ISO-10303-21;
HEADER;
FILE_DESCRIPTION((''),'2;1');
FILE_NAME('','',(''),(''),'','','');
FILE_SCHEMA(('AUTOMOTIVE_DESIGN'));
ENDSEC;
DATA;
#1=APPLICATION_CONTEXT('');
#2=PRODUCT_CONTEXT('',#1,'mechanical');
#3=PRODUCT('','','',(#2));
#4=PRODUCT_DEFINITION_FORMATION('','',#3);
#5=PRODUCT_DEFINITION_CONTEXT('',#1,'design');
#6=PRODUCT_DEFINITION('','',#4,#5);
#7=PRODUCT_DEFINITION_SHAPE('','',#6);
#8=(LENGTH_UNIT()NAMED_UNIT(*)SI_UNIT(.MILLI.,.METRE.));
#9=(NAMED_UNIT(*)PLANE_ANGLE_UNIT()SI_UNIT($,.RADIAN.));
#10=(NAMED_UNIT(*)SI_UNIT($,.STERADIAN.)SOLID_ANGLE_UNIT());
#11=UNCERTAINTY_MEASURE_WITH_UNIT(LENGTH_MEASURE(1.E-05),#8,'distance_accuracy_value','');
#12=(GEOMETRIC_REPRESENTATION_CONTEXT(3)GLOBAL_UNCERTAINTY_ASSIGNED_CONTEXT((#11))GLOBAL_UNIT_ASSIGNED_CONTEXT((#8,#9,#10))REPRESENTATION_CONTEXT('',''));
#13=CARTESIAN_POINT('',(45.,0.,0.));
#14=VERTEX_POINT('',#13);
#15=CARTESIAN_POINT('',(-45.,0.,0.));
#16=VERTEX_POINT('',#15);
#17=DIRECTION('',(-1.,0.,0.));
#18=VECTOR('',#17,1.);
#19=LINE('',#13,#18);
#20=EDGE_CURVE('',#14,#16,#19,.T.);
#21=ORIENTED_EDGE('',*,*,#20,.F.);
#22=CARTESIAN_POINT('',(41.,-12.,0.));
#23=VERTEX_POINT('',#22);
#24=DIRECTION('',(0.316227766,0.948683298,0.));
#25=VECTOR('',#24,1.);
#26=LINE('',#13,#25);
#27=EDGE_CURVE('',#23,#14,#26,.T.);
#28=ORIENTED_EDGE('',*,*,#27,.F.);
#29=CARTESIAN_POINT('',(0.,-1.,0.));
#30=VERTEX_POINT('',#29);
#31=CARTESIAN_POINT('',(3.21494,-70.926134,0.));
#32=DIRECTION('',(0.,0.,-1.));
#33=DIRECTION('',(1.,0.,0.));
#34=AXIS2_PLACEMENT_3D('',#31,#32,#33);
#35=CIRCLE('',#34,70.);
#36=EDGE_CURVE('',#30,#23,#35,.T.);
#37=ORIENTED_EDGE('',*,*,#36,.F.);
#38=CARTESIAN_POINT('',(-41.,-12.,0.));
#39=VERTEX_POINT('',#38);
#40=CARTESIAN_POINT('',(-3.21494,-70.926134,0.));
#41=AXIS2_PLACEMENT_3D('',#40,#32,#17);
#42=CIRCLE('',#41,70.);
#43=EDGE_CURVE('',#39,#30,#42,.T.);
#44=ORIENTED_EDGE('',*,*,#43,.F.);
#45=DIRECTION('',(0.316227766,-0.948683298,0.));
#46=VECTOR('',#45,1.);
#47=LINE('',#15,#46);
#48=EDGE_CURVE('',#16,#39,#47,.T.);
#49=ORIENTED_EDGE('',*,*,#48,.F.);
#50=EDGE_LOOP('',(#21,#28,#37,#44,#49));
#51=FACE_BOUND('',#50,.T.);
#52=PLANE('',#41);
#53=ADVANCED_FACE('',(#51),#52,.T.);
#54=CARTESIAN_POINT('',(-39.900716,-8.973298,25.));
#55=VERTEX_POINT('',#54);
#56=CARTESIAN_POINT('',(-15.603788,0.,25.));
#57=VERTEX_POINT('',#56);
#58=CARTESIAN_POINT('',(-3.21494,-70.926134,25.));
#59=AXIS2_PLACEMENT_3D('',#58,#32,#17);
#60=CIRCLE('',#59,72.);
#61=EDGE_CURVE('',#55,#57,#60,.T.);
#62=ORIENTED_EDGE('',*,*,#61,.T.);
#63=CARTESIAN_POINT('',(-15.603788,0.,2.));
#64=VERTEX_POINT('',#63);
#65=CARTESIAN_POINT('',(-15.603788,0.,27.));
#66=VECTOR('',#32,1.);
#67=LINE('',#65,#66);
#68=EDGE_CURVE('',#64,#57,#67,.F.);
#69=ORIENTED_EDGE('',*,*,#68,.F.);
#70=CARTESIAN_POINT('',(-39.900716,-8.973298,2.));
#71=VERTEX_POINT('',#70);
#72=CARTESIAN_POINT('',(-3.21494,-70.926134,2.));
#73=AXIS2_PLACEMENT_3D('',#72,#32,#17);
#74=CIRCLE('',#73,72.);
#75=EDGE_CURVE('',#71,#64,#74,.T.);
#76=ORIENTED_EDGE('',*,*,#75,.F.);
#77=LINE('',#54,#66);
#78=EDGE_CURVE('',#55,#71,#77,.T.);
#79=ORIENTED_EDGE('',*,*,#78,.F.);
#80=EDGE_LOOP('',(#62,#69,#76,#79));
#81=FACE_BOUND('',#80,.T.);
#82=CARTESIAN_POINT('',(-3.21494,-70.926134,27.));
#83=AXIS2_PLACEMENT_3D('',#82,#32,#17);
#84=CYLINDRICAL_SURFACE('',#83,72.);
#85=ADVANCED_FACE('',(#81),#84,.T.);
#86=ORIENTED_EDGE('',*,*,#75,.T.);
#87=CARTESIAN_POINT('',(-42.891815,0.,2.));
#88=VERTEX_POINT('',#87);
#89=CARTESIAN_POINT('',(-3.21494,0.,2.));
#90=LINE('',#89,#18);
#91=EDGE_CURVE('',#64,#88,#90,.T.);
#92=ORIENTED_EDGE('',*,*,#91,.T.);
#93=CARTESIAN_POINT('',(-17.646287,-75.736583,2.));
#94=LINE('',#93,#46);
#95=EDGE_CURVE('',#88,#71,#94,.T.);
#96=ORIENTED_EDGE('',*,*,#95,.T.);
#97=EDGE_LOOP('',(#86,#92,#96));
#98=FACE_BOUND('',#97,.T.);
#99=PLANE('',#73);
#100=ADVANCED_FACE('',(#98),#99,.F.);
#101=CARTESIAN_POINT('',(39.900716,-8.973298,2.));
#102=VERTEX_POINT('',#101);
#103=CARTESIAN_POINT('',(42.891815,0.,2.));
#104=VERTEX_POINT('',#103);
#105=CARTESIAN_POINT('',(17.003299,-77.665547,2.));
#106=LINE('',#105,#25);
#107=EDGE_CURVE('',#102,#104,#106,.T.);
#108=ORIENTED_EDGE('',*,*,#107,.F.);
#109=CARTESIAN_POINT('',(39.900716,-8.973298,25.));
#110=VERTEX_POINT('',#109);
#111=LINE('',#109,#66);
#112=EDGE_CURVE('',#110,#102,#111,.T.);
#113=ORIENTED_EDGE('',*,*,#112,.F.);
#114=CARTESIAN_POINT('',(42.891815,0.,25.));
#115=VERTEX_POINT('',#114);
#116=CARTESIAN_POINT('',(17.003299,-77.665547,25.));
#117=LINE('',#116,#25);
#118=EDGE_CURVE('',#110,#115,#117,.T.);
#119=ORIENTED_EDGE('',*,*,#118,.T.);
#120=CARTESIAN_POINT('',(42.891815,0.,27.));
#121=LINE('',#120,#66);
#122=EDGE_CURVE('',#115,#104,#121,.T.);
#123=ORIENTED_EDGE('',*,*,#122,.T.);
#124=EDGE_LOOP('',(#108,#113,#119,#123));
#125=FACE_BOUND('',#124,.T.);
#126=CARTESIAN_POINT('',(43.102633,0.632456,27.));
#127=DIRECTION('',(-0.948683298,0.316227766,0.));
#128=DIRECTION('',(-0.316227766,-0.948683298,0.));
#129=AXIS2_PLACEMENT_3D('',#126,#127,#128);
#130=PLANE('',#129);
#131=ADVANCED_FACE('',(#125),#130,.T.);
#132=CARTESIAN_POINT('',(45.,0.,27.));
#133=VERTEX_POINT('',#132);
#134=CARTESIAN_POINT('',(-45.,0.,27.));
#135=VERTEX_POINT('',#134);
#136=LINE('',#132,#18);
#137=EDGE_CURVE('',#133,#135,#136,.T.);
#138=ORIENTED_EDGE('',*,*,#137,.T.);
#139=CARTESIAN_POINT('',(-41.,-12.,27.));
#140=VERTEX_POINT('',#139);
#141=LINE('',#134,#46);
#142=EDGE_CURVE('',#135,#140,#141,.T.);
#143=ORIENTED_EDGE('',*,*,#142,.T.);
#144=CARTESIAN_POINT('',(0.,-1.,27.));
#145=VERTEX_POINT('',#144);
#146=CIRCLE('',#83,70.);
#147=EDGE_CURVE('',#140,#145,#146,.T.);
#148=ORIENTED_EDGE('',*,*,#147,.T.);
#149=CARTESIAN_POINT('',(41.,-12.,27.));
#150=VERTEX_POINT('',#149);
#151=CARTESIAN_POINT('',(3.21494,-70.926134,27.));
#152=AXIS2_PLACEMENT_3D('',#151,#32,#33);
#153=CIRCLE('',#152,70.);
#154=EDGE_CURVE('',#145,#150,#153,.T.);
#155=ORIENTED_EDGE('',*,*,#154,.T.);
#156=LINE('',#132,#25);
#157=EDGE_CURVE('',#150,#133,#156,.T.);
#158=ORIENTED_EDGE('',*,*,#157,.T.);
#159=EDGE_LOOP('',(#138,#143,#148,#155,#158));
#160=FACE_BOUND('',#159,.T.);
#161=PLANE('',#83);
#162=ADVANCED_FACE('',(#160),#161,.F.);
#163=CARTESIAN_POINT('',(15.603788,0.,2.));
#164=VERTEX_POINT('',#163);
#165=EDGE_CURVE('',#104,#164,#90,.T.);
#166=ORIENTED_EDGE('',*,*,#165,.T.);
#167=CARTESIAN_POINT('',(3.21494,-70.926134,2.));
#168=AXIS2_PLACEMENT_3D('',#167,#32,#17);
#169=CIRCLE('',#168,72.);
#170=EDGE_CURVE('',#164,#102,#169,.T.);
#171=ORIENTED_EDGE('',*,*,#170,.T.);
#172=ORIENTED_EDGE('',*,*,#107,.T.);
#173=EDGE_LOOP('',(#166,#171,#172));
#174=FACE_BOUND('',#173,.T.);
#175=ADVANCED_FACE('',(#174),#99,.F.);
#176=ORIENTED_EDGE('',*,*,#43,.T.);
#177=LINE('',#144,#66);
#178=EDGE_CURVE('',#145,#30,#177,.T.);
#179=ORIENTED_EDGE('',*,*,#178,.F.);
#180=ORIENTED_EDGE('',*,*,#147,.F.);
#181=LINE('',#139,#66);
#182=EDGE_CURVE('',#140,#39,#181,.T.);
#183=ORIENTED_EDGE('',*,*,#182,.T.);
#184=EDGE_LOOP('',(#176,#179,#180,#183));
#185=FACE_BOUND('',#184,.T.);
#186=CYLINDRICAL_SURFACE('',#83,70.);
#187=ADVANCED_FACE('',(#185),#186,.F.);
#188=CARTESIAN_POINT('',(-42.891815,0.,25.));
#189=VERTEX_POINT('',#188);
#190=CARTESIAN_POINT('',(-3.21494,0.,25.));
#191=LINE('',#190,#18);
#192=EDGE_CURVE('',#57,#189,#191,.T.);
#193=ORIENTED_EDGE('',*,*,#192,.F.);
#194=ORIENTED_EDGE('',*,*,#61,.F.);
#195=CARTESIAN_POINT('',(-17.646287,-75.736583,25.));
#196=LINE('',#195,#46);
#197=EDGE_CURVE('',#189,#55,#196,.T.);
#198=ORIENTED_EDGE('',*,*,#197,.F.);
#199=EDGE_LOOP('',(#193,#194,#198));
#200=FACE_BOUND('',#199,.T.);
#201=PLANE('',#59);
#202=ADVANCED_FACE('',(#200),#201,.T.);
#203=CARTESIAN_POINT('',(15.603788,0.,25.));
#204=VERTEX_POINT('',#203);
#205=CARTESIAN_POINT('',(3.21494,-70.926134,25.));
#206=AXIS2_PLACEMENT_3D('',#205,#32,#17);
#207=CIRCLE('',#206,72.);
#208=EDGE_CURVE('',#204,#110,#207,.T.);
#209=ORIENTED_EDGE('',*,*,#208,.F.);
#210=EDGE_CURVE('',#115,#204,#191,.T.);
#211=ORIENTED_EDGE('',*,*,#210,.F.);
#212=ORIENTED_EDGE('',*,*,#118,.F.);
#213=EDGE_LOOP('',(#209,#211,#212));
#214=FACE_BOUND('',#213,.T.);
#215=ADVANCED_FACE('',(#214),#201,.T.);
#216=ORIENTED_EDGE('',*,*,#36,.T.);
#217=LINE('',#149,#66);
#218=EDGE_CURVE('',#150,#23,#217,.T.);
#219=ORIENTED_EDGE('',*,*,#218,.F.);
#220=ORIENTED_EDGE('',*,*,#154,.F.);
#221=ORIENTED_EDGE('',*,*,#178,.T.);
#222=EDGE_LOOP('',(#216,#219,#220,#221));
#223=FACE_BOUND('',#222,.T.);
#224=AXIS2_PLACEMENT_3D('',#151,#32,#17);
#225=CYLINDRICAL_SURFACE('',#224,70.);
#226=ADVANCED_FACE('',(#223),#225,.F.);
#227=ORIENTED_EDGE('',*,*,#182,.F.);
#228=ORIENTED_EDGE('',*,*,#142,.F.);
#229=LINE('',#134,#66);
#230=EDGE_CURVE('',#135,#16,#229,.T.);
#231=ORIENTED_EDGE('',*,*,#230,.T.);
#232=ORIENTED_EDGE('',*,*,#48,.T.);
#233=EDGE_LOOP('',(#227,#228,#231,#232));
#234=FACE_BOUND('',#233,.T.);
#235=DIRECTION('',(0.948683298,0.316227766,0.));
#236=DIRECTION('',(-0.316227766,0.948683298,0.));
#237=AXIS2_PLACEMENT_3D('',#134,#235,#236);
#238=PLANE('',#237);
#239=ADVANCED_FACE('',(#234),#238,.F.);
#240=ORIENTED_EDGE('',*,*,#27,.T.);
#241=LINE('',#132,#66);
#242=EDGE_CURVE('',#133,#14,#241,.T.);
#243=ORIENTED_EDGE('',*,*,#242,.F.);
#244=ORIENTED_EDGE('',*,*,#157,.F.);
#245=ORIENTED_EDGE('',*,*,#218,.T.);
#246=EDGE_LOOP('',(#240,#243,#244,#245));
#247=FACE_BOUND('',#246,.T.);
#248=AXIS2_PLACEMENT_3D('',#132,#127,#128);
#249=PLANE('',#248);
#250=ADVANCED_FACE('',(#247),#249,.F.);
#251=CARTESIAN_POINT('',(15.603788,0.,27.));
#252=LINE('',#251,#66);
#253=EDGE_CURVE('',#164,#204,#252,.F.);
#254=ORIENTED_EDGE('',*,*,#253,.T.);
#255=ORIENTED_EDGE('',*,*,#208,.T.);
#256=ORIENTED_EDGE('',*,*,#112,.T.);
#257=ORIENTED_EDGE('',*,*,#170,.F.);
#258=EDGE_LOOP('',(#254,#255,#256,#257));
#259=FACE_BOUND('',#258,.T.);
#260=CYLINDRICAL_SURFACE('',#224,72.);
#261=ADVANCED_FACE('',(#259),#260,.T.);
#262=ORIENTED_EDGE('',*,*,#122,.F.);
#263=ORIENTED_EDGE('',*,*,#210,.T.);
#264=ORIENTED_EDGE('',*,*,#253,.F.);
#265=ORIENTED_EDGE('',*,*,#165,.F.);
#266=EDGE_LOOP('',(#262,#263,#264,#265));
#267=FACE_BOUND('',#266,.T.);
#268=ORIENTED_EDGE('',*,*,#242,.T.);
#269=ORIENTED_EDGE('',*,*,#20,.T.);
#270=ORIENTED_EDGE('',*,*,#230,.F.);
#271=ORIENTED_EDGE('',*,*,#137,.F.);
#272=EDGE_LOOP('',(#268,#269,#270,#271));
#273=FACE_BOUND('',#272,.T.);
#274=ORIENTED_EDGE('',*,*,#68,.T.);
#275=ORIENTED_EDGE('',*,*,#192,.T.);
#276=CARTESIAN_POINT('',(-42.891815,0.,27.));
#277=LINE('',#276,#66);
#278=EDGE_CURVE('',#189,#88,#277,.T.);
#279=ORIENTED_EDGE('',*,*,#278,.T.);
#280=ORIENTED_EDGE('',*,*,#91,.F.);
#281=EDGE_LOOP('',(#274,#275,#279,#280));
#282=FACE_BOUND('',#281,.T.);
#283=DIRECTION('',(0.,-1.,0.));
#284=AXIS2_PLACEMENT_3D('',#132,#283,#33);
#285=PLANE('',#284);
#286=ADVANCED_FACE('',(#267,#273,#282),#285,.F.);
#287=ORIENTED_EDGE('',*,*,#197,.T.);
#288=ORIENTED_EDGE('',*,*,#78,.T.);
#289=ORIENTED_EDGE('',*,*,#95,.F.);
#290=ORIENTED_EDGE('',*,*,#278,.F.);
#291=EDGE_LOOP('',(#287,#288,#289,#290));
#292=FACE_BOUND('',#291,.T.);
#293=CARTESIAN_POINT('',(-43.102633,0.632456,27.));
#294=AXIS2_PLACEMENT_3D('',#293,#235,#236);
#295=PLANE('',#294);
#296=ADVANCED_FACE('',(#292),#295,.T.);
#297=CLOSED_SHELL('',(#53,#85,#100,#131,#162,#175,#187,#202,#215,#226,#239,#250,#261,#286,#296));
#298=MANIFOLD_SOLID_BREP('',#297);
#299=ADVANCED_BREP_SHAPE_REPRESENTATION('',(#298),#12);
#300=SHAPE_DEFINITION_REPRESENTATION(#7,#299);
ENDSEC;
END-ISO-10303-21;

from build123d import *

# Parameters (mm, degrees)
BOSS_EXTRUDE1_DEPTH = 27
SHELL1_START        = 2
SHELL1_DEPTH        = 23


# Read off the part's stored shape, not the designer's step: Shell1
with BuildPart() as part:
    # Sketch1 → Boss-Extrude1 (new body)
    with BuildSketch(Plane.XY):
        with BuildLine():
            Line((45, 0), (-45, 0))
            Line((-45, 0), (-41, -12))
            ThreePointArc((-41, -12), (-21.353939388, -3.317135008), (0, -1))
            ThreePointArc((0, -1), (21.353939388, -3.317135008), (41, -12))
            Line((41, -12), (45, 0))
        make_face()
    extrude(amount=BOSS_EXTRUDE1_DEPTH)

    # Shell1 outline → Shell1 (cut)
    with BuildSketch(Plane.XY.offset(SHELL1_START)):
        with BuildLine():
            Line((-42.891814893, 0), (-39.90071559, -8.97329791))
            ThreePointArc((-39.90071559, -8.97329791), (-28.159071544, -3.3851069), (-15.603788395, 0))
            Line((-15.603788395, 0), (-42.891814893, 0))
        make_face()
        with BuildLine():
            Line((42.891814893, 0), (15.603788395, 0))
            ThreePointArc((15.603788395, 0), (28.159071544, -3.3851069), (39.90071559, -8.97329791))
            Line((39.90071559, -8.97329791), (42.891814893, 0))
        make_face()
    extrude(amount=SHELL1_DEPTH, mode=Mode.SUBTRACT)


solid = part.part
